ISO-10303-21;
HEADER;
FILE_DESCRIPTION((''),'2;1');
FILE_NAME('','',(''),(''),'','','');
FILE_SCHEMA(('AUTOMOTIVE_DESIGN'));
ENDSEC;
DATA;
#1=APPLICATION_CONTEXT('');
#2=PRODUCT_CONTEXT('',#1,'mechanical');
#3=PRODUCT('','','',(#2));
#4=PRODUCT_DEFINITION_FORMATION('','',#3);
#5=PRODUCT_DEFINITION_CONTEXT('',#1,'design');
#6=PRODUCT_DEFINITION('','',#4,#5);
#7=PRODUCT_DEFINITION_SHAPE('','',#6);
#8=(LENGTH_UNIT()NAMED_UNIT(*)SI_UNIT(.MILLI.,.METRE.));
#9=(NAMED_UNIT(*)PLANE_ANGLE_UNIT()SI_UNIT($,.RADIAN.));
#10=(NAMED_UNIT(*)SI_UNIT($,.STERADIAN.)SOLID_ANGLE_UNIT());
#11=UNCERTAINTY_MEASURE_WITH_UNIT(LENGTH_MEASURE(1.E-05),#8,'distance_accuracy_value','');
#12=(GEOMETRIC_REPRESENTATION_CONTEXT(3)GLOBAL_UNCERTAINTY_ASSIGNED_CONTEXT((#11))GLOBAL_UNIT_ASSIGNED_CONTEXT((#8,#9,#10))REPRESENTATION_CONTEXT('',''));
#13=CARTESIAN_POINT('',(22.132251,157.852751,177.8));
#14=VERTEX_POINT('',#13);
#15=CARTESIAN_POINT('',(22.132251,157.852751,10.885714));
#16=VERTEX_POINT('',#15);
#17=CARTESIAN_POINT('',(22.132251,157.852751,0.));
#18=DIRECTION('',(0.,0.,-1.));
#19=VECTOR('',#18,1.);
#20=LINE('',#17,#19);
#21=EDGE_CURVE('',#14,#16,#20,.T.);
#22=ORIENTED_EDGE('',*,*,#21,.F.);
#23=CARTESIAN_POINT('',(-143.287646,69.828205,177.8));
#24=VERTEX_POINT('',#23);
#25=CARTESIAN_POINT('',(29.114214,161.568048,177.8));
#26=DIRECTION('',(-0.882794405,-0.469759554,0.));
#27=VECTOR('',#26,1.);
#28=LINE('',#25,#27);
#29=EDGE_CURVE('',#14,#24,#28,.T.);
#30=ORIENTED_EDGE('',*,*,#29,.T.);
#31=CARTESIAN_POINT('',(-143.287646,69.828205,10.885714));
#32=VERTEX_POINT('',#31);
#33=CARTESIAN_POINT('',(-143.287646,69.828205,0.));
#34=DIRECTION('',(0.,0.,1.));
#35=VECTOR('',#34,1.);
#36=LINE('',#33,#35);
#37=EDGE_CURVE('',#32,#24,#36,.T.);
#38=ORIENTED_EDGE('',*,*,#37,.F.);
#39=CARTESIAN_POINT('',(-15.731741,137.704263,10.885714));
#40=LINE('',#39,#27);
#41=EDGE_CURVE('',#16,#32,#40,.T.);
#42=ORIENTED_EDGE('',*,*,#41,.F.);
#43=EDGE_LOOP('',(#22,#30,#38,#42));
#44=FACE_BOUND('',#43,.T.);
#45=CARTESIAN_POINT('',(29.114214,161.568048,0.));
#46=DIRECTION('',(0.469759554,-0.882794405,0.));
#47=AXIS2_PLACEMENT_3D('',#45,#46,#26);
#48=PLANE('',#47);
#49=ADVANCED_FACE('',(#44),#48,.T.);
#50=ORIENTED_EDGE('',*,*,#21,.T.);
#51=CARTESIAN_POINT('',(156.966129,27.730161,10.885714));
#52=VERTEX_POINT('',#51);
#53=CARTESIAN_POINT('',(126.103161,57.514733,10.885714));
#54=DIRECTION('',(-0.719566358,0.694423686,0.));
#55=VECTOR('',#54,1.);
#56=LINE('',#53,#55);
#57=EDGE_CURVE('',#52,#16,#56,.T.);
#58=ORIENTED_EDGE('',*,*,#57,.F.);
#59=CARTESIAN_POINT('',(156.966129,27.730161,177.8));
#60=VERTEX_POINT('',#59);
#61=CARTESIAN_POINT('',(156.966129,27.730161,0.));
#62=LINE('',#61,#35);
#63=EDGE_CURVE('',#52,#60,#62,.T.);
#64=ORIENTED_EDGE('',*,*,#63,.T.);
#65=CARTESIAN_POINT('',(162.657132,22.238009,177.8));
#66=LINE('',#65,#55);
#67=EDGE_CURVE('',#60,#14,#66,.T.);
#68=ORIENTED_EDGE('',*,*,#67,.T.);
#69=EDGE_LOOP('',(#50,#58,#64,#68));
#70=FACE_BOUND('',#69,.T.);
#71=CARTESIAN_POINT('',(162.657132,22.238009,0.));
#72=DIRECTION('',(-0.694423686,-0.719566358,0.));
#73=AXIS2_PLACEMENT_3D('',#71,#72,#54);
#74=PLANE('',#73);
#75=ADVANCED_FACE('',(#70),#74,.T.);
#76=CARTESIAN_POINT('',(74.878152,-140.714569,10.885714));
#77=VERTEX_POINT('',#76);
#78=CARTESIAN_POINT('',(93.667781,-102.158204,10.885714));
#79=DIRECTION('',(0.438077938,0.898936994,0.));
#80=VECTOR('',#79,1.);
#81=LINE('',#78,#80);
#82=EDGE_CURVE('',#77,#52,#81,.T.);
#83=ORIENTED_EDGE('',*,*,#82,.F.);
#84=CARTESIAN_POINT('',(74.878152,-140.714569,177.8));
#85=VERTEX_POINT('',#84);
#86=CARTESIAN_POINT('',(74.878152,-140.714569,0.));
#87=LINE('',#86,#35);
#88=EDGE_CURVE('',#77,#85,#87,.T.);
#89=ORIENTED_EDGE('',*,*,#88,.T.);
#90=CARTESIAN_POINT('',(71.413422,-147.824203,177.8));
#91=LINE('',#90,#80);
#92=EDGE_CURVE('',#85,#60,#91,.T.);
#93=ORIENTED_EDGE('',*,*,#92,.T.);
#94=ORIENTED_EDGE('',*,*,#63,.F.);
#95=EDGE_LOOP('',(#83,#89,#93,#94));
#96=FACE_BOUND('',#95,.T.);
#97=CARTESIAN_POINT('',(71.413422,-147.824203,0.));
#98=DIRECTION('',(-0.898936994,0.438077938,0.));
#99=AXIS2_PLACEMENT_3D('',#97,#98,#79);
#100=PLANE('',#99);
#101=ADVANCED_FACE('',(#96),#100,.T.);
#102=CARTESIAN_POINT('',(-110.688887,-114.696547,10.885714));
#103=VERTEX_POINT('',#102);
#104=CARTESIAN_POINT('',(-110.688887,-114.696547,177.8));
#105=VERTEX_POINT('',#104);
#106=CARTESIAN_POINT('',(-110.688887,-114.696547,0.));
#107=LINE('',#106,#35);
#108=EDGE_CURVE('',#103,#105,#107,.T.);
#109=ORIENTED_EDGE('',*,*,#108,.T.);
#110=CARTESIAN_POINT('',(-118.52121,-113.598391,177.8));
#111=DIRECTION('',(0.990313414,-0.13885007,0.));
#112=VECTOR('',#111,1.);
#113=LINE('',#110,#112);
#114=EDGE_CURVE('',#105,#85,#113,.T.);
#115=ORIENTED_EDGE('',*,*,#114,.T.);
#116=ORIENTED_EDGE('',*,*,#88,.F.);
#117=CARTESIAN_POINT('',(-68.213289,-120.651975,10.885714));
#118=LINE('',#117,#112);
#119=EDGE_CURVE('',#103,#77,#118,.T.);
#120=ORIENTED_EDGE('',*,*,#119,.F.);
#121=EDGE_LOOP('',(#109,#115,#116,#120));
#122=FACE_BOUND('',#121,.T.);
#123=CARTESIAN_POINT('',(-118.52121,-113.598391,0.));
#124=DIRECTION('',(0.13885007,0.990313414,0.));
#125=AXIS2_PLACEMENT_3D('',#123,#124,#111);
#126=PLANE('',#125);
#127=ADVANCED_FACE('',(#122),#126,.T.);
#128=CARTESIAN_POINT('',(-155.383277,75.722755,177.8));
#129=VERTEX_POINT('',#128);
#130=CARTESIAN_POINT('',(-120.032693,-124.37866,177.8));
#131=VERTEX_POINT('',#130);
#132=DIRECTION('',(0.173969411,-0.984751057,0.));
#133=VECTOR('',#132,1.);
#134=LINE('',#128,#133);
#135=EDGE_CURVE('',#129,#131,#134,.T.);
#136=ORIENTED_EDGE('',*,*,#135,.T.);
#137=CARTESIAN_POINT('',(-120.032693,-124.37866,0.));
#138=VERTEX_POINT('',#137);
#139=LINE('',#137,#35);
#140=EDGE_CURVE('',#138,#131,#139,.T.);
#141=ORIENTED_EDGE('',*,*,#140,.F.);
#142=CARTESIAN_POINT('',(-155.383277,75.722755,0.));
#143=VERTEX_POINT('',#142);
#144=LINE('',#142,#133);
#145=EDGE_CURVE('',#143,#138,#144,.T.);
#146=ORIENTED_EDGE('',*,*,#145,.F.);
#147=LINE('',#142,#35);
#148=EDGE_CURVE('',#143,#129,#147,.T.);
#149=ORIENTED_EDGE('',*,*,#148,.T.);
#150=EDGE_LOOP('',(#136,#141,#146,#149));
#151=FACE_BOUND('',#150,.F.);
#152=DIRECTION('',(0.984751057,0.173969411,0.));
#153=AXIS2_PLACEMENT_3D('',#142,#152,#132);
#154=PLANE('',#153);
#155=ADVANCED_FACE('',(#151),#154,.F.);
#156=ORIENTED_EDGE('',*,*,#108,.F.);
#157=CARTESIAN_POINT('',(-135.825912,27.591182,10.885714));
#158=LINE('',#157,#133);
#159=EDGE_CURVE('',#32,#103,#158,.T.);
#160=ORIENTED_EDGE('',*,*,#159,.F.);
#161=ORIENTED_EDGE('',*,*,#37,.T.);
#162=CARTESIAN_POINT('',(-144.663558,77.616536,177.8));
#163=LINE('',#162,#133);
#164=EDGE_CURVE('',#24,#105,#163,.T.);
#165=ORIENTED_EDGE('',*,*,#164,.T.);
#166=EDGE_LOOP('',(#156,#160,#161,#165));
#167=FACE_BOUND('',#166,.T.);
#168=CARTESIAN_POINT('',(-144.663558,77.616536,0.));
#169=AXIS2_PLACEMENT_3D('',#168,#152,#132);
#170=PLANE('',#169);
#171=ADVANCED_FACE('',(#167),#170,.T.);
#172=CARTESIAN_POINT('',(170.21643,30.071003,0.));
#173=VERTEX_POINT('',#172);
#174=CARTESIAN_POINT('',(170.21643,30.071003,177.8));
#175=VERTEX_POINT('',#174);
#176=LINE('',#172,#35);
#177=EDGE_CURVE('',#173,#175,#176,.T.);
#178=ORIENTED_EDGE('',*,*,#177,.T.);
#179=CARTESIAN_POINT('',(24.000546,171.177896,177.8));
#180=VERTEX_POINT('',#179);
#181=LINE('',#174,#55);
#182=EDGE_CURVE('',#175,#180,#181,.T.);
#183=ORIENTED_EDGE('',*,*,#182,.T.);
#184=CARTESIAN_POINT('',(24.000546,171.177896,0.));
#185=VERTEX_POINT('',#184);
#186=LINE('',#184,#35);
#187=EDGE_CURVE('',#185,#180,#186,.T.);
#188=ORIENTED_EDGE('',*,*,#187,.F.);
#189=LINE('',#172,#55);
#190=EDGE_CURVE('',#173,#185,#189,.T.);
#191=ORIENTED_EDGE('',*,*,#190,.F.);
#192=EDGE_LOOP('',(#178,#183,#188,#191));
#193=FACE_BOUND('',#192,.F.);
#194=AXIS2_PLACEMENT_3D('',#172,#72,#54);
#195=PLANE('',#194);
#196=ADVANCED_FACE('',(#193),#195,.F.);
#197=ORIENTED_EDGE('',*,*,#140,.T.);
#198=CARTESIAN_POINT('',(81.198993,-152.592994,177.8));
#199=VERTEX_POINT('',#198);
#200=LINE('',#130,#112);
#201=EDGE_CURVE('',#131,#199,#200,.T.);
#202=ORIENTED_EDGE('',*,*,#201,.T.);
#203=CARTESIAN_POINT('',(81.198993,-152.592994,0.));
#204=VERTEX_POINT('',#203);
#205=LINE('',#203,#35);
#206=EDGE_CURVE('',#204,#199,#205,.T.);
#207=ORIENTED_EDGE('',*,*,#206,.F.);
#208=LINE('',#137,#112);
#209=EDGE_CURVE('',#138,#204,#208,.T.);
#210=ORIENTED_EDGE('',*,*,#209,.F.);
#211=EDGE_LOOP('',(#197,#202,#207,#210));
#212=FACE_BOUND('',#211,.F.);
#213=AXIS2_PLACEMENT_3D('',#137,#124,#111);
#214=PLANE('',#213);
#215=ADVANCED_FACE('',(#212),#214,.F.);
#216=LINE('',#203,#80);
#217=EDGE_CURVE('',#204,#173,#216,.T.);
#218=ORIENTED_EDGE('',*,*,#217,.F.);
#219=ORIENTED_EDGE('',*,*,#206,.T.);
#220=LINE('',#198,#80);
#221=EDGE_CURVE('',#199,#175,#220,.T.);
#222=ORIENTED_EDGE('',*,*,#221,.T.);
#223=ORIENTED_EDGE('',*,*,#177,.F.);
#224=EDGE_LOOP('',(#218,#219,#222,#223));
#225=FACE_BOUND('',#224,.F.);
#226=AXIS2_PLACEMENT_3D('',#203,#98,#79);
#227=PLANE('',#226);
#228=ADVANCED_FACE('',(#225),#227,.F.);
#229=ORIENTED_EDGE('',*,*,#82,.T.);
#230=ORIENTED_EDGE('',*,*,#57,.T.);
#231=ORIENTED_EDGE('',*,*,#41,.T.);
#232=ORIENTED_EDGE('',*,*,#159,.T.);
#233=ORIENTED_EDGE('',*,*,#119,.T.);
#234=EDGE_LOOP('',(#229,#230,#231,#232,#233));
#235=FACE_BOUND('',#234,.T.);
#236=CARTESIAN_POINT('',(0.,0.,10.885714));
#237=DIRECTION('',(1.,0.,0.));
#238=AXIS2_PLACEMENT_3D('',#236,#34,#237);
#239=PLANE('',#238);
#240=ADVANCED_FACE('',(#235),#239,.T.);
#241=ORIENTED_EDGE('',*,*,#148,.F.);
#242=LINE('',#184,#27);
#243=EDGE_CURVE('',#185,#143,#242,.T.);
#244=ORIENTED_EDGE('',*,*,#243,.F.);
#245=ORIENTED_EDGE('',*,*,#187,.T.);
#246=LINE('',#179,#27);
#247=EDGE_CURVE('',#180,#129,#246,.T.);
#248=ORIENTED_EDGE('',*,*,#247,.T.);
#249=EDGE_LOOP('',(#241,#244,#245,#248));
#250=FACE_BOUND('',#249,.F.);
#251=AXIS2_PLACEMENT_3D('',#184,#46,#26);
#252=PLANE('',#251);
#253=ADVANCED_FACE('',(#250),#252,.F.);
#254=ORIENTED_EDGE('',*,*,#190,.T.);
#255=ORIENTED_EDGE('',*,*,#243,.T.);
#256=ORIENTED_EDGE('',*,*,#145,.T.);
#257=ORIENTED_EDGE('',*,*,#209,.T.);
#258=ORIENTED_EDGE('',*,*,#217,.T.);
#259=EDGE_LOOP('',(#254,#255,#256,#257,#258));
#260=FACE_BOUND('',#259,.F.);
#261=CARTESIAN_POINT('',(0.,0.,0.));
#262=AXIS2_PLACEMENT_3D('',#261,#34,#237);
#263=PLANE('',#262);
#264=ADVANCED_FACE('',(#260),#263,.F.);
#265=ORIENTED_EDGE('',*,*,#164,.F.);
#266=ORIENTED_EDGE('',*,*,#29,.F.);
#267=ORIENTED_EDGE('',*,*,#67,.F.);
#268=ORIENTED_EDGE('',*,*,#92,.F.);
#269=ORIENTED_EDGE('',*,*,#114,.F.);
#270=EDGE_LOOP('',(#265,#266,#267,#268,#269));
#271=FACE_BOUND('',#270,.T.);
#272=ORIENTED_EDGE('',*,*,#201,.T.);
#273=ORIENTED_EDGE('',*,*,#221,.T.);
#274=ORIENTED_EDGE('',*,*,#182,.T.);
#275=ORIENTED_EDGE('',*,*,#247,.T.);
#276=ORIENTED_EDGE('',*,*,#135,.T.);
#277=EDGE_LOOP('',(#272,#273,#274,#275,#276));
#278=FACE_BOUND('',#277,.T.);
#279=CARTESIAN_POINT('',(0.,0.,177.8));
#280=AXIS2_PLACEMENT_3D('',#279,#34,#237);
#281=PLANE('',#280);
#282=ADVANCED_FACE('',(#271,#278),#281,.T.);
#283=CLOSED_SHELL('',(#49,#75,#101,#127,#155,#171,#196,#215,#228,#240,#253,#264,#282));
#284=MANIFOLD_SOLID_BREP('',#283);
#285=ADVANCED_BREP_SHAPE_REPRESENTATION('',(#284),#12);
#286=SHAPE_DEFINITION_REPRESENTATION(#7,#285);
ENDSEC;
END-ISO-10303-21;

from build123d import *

# Parameters (mm, degrees)
F1_DEPTH = 177.8
F2_T     = -10.8857142857


# Not quite as in the source:
# - a length typed as a fraction of an inch, garbled in the dataset ("3 / 203.2 mm" for 3/8 in), is restored


with BuildPart() as f1:
    # F0 (on Top) → F1 (new body)
    with BuildSketch(Plane.XY):
        Polygon((24.0005461687, 171.1778961441), (-155.3832769332, 75.7227547983), (-120.0326925967, -124.378659957), (81.1989931472, -152.5929941269), (170.216430214, 30.0710031415), align=None)
    extrude(amount=F1_DEPTH)

    # F2
    f2_openings = [f1.faces().sort_by_distance(p)[0] for p in [
        (0, 0, 177.8),
    ]]
    offset(amount=F2_T, openings=f2_openings)


solid = f1.part
